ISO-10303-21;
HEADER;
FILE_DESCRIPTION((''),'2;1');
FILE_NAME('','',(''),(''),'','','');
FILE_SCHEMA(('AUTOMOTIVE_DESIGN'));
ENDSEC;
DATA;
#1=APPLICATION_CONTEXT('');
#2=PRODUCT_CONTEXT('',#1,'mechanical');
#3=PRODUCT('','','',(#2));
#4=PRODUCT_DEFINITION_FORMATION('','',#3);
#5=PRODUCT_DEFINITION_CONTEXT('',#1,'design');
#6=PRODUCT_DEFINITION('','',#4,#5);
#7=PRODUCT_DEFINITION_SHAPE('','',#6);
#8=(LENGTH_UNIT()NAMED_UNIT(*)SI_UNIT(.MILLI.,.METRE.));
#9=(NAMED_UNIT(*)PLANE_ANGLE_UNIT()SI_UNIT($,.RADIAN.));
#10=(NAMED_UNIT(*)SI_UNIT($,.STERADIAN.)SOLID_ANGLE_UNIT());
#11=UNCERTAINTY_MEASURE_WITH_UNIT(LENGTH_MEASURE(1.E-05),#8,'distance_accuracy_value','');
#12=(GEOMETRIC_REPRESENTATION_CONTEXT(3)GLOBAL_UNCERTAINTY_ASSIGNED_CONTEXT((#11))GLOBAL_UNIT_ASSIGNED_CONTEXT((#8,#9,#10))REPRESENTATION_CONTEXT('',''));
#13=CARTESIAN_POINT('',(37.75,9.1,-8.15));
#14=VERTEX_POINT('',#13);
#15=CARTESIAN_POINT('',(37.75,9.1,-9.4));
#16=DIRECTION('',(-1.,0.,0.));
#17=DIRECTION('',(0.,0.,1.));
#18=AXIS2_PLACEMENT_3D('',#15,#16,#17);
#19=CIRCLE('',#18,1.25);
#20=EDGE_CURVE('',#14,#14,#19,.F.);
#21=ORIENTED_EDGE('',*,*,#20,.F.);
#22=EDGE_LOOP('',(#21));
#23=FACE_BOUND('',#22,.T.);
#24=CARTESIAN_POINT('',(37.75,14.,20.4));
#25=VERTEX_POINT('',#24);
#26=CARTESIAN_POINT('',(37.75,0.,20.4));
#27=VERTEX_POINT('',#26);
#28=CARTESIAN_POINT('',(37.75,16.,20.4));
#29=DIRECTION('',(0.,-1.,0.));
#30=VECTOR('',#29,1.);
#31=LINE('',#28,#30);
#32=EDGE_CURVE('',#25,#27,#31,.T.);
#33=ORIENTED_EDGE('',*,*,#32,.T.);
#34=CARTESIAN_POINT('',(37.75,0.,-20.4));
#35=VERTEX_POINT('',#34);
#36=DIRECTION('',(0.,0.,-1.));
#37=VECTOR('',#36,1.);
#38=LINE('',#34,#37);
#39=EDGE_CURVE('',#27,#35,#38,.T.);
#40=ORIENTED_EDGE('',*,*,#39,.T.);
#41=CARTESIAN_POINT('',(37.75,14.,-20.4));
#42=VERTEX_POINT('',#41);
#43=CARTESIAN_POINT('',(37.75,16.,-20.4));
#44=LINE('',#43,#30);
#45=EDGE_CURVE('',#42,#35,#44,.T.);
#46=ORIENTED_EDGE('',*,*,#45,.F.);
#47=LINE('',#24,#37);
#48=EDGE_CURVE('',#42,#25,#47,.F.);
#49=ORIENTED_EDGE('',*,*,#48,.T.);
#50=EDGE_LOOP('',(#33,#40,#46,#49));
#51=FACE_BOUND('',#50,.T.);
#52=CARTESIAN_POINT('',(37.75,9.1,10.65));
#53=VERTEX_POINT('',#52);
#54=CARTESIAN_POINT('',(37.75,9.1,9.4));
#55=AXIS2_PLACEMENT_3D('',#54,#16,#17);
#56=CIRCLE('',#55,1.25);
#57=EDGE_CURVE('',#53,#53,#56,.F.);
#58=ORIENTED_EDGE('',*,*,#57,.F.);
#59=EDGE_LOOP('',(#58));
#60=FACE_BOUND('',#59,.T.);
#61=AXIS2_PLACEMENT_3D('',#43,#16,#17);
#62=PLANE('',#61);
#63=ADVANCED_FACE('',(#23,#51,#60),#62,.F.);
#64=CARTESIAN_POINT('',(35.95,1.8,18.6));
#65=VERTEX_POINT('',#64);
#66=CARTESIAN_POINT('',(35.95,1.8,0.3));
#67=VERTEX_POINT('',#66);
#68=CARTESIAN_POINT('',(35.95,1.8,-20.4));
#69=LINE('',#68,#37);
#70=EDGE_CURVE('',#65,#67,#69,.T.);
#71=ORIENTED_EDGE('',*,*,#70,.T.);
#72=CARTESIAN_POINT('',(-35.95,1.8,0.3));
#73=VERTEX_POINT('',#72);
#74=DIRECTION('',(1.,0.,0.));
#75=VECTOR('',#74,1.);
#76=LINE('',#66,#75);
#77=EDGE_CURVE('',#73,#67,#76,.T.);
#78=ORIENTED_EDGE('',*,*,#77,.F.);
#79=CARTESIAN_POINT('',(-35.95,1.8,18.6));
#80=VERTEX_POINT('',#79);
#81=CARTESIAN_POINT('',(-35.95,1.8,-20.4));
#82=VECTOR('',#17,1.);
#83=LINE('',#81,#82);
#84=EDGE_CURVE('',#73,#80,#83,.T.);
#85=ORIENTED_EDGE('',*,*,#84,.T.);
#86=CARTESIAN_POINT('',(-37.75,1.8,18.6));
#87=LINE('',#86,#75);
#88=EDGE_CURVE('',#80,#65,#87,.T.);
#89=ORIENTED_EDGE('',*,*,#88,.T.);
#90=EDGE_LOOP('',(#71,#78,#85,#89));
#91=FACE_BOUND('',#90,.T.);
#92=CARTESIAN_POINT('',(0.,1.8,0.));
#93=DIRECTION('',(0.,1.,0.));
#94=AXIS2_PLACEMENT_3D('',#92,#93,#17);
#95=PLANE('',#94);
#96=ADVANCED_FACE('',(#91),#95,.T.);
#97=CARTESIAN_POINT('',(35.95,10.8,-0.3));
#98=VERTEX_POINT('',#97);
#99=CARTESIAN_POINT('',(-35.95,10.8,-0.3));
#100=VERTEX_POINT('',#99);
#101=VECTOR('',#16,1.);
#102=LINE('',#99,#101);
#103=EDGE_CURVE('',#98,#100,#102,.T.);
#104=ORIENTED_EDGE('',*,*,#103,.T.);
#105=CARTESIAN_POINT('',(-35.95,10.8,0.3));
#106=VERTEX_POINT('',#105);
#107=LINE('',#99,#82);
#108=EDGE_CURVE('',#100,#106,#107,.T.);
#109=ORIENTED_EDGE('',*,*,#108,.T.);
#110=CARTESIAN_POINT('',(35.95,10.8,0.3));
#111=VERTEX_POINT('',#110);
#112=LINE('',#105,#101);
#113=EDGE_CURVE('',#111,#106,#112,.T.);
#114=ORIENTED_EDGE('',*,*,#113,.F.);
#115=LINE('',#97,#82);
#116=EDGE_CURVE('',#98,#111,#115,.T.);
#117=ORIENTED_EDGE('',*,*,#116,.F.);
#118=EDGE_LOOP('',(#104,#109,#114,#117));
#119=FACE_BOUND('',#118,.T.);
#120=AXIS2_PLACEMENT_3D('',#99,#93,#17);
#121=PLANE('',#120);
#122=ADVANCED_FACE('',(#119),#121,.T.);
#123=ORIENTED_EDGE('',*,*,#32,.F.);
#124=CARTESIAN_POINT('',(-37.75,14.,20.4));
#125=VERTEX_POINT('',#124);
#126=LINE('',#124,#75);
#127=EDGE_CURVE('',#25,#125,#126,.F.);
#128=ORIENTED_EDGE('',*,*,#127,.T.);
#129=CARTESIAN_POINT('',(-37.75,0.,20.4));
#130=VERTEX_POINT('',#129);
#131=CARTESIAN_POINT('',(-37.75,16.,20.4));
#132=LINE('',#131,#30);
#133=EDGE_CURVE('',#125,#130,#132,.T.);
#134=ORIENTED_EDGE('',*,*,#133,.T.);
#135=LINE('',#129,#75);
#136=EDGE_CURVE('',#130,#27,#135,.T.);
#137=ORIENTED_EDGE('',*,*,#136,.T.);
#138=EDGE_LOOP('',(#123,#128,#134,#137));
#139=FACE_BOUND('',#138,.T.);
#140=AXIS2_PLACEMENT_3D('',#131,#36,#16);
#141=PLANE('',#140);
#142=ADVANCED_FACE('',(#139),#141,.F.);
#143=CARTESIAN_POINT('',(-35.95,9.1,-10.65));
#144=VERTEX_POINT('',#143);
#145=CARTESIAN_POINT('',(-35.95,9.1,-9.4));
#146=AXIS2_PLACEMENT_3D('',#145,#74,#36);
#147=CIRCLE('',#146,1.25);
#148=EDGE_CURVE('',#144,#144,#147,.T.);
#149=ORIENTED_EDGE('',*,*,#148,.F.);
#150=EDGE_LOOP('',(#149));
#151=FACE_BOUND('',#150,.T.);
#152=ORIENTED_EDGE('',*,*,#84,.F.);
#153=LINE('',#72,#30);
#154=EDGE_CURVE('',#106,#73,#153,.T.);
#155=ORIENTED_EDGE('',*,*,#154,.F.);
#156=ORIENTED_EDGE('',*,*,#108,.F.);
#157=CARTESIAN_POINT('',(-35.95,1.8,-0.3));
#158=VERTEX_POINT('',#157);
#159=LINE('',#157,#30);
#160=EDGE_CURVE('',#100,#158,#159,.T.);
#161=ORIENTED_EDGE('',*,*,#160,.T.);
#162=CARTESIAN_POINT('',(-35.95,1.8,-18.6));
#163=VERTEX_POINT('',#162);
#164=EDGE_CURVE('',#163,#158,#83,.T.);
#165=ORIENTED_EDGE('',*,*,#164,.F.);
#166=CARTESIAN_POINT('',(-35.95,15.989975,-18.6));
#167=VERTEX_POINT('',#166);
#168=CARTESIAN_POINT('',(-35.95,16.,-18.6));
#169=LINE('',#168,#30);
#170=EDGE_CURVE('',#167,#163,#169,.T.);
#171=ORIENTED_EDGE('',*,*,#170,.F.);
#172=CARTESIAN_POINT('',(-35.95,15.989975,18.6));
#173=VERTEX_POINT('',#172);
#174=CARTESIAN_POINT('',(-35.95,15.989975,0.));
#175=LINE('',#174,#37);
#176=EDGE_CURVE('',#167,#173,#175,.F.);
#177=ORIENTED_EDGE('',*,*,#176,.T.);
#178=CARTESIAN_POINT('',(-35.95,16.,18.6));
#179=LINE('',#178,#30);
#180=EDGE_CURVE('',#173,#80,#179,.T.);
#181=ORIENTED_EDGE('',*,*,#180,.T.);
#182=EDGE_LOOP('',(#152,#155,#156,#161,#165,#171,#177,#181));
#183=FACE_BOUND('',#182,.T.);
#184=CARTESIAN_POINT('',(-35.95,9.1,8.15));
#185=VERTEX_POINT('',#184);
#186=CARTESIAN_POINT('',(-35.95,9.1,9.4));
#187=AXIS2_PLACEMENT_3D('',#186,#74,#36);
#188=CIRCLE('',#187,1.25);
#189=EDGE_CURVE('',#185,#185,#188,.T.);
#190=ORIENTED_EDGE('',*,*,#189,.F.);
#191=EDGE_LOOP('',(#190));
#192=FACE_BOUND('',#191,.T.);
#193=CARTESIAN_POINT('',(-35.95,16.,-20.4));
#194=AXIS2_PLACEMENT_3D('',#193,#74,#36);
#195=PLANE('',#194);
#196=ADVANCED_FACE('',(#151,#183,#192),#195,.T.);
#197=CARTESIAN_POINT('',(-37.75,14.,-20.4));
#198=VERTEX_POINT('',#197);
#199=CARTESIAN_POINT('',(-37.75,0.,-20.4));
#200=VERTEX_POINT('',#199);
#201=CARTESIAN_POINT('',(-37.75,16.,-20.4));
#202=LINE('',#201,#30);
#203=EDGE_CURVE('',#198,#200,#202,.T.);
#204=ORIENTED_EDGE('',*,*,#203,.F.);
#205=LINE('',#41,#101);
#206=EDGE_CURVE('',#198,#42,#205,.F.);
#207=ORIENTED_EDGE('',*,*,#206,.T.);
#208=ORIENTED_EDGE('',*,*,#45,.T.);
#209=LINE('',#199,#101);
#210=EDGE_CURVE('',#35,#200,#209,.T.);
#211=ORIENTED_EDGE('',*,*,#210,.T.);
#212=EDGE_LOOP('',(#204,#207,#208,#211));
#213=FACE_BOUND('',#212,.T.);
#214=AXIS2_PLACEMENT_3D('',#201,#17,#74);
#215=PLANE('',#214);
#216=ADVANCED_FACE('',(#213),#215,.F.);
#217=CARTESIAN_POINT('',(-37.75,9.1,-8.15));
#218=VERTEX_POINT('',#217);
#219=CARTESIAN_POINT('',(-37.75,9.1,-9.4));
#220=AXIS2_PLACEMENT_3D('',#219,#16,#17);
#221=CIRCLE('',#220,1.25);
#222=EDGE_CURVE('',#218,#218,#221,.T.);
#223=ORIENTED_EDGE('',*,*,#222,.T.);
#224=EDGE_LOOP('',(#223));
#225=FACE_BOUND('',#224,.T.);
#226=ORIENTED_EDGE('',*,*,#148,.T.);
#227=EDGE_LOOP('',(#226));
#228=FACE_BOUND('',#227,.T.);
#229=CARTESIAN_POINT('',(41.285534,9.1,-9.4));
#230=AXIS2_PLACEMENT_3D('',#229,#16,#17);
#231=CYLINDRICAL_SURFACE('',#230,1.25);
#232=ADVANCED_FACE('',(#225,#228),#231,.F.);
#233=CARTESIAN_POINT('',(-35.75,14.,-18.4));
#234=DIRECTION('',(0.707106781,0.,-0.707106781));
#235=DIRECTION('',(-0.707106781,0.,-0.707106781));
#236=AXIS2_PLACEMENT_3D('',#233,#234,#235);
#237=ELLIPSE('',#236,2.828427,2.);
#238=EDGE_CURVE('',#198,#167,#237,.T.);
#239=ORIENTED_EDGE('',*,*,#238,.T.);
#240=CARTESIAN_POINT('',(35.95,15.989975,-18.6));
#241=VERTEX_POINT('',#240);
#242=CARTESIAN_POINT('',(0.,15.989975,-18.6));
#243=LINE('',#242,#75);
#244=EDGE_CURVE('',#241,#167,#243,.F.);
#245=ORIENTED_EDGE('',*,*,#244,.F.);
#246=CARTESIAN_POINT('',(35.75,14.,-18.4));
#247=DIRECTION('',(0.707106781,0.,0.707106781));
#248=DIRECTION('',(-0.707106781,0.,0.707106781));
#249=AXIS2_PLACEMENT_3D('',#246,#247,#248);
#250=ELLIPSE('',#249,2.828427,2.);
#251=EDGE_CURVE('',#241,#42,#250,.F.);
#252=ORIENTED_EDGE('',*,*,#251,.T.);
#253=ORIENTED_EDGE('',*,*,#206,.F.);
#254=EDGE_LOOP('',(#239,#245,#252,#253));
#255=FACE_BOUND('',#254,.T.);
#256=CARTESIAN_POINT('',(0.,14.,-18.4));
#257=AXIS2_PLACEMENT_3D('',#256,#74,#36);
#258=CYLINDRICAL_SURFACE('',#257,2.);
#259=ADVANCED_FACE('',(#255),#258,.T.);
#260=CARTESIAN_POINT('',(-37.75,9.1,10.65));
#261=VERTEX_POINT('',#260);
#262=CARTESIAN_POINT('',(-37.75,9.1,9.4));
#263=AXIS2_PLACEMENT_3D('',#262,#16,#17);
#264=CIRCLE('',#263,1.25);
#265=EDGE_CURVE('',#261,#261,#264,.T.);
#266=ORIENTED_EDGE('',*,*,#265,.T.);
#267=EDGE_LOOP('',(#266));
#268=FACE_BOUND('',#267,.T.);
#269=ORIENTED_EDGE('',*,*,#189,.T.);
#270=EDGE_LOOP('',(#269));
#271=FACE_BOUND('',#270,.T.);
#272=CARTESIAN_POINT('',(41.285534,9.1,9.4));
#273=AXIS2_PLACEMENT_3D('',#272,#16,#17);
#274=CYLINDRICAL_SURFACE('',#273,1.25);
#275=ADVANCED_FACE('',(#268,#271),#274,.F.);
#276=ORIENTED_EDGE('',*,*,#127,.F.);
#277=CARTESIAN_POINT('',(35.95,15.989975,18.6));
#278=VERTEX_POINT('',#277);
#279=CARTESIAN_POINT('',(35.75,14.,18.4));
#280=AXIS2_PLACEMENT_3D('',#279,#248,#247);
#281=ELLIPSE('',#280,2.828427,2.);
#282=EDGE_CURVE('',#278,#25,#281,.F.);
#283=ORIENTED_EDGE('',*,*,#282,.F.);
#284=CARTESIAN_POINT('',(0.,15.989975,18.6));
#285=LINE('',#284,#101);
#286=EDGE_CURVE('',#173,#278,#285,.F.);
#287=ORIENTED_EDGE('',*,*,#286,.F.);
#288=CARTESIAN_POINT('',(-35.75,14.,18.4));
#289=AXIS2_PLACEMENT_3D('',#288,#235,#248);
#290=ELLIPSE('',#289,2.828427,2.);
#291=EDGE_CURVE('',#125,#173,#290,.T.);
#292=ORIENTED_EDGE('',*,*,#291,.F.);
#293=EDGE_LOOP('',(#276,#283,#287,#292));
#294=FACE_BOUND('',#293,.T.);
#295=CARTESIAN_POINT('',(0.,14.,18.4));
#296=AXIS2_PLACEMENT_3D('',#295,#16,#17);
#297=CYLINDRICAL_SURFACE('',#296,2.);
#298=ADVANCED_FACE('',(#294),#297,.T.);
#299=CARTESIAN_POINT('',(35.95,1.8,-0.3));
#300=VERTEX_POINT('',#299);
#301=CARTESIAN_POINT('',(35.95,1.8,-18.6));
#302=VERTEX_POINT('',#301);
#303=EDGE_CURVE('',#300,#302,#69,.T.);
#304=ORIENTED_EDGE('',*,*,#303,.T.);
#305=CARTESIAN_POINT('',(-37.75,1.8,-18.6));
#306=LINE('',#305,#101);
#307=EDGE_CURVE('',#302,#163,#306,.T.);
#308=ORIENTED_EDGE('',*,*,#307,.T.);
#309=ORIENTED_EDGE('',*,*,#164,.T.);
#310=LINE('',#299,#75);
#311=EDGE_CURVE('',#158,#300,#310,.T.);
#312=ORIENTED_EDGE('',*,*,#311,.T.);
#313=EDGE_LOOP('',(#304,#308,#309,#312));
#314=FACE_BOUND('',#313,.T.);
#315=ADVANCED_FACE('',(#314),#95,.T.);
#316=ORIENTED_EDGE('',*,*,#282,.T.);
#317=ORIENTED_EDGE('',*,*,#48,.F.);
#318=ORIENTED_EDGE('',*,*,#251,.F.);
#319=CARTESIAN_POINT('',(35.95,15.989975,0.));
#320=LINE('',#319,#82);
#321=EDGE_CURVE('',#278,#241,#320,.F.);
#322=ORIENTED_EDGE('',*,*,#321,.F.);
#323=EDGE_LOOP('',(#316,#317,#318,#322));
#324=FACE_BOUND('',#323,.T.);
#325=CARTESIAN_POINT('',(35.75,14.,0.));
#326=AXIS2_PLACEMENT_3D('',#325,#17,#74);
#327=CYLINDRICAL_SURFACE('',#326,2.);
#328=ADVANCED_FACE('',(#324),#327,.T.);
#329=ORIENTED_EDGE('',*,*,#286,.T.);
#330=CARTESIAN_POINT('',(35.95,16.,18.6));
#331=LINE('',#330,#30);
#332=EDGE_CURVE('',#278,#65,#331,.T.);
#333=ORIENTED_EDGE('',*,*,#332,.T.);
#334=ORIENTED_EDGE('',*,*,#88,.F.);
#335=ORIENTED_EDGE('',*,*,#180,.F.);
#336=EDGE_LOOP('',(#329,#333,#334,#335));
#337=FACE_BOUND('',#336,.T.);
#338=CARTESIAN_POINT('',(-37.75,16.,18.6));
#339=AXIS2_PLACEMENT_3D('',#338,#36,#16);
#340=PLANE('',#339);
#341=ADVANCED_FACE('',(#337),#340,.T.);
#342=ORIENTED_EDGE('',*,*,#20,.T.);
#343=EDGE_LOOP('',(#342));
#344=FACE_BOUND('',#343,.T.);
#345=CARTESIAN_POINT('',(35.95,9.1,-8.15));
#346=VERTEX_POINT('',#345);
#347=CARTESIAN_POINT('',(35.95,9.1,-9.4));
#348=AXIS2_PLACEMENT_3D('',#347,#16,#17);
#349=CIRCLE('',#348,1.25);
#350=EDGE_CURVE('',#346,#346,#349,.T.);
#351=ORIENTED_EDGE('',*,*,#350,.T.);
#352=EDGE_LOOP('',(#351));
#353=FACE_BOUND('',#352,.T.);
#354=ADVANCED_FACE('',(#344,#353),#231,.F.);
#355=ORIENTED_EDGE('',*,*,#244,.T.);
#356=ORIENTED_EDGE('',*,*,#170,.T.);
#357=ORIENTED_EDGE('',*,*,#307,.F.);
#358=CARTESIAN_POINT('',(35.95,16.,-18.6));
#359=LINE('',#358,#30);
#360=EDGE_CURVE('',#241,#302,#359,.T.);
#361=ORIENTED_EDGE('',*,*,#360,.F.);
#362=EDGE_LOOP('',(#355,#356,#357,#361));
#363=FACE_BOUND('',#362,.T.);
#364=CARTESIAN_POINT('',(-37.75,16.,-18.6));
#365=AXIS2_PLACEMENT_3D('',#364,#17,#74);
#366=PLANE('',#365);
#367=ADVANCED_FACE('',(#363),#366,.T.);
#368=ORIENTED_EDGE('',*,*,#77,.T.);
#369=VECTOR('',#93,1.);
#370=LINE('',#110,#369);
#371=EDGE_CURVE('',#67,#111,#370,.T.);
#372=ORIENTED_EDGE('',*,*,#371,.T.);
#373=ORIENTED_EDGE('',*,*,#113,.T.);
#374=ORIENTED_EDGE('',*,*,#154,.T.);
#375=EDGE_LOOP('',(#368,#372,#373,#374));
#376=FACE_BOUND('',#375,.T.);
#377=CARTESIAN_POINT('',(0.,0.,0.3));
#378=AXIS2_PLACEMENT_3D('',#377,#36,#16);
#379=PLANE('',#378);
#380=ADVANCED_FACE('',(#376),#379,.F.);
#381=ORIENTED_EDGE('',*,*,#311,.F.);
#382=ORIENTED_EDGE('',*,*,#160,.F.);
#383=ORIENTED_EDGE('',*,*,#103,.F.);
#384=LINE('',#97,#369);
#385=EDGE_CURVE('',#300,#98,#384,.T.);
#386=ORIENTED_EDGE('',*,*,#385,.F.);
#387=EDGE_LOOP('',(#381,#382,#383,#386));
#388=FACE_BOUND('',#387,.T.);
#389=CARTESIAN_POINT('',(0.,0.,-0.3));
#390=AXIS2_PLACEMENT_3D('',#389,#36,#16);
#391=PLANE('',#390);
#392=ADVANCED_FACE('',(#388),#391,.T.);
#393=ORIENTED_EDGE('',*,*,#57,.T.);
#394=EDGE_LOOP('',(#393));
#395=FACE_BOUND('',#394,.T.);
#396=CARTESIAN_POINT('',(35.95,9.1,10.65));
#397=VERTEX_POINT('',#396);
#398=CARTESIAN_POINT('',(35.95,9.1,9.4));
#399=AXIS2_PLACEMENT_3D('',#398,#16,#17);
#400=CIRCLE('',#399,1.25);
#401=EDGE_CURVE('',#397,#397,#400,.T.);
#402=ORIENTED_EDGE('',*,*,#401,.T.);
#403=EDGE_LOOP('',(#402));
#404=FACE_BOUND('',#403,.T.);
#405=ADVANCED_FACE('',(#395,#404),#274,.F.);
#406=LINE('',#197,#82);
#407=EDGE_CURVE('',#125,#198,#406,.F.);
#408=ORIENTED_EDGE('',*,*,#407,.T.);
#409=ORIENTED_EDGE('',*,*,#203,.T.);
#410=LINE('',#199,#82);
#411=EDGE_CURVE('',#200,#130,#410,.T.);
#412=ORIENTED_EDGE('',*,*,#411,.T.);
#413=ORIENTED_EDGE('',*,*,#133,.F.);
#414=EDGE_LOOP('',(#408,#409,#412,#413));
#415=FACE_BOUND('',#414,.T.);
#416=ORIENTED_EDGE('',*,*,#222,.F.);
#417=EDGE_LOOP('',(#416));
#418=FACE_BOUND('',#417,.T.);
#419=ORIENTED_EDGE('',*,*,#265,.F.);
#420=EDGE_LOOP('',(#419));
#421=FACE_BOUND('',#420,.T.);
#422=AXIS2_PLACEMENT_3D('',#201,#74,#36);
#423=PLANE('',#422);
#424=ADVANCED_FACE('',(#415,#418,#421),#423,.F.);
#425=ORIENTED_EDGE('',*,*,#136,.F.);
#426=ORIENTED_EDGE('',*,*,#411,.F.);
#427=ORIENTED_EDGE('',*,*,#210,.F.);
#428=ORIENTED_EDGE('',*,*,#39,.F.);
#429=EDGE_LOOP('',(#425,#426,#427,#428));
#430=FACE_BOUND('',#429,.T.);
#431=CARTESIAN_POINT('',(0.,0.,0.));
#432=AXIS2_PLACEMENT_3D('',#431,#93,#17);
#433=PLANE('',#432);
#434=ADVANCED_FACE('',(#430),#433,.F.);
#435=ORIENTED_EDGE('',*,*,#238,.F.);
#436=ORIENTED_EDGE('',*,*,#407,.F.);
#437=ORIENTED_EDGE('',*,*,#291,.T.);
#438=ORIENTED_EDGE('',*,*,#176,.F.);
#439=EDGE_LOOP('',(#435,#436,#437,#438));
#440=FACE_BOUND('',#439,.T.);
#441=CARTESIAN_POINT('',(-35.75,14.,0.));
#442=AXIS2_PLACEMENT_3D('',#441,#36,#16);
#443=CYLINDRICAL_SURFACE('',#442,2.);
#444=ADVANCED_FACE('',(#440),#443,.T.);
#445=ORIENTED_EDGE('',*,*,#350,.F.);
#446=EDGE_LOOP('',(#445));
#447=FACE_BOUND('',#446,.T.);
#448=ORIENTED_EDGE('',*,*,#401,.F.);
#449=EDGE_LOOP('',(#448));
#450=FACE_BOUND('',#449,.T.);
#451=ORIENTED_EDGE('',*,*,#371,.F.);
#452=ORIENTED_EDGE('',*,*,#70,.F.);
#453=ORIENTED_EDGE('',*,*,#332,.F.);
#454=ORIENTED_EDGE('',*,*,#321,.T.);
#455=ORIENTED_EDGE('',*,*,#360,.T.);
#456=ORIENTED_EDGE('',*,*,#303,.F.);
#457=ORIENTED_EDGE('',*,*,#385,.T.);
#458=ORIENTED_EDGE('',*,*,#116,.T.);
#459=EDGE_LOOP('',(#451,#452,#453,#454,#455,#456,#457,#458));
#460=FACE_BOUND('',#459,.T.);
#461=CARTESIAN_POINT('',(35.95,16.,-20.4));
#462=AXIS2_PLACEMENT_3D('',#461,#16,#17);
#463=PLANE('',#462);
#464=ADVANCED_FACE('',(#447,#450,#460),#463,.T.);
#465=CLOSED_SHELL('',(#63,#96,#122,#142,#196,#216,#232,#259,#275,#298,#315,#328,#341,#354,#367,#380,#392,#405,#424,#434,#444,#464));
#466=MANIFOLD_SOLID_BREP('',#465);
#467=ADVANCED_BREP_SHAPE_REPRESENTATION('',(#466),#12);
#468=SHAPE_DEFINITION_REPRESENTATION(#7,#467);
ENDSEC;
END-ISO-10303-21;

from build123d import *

# Parameters (mm, degrees)
CROQUIS1_W                   = 75.5
CROQUIS1_H                   = 40.8
SALIENTE_EXTRUIR1_DEPTH      = 16
VACIADO1_T                   = -1.8
SALIENTE_EXTRUIR2_DEPTH      = 0.3
SALIENTE_EXTRUIR2_DEPTH_BACK = 0.3
CROQUIS2_W                   = 71.9
CROQUIS2_H                   = 9
CORTAR_EXTRUIR1_REACH        = 81.827
CROQUIS3_R                   = 1.25
MATRIZL1_COUNT               = 2
MATRIZL1_PITCH               = 18.8
REDONDEO1_R                  = 2


with BuildPart() as part:
    # Croquis1 → Saliente-Extruir1 (new body)
    with BuildSketch(Plane(origin=(0, 0, 0), x_dir=(1, 0, 0), z_dir=(0, 1, 0))):
        Rectangle(CROQUIS1_W, CROQUIS1_H)
    extrude(amount=SALIENTE_EXTRUIR1_DEPTH)

    # Vaciado1
    vaciado1_openings = [part.faces().sort_by_distance(p)[0] for p in [
        (0, 16, 0),
    ]]
    offset(amount=VACIADO1_T, openings=vaciado1_openings, kind=Kind.INTERSECTION)

    # Croquis2 → Saliente-Extruir2 (add, two sides: drawn at the far end of the back side and taken through both)
    with BuildSketch(Plane.XY.offset(-SALIENTE_EXTRUIR2_DEPTH_BACK)):
        with Locations((0, 6.3)):
            Rectangle(CROQUIS2_W, CROQUIS2_H)
    extrude(amount=SALIENTE_EXTRUIR2_DEPTH + SALIENTE_EXTRUIR2_DEPTH_BACK)

    # Cortar-Extruir1: up to this face of the body (flat: up to its plane)
    cortar_extruir1_end = Plane(part.part.faces().sort_by_distance((37.75, 8, 0))[0])
    # Croquis3 → Cortar-Extruir1 (cut, up to the picked face)
    with BuildSketch(Plane.ZY.offset(37.75), mode=Mode.PRIVATE) as cortar_extruir1_sk1:
        with Locations((9.4, 9.1)):
            Circle(CROQUIS3_R)
    cortar_extruir1_tool1 = split(extrude(cortar_extruir1_sk1.sketch, amount=-CORTAR_EXTRUIR1_REACH, mode=Mode.PRIVATE), bisect_by=cortar_extruir1_end, keep=Keep.BOTH, mode=Mode.PRIVATE)
    cortar_extruir1 = cortar_extruir1_tool1.solids().sort_by(Axis((-37.75, 9.1, 9.4), (1, 0, 0)))[0]
    add(cortar_extruir1, mode=Mode.SUBTRACT)

    # MatrizL1: Cortar-Extruir1 ×2
    with Locations(*[(0, 0, -i * MATRIZL1_PITCH) for i in range(1, MATRIZL1_COUNT)]):
        add(cortar_extruir1, mode=Mode.SUBTRACT)

    # Redondeo1
    # the kernel refuses this fillet: 2 mm, written as the material it takes off along each edge
    with BuildSketch(Plane(origin=(-42.75, 16, -20.4), x_dir=(0, -1, 0), z_dir=(1, 0, 0))) as redondeo1_piece_1:
        with BuildLine():
            CenterArc((REDONDEO1_R, -REDONDEO1_R), REDONDEO1_R, 90, 90)
            Line((0, -REDONDEO1_R), (0, 0))
            Line((0, 0), (REDONDEO1_R, 0))
        make_face()
    extrude(amount=85.5, mode=Mode.SUBTRACT)
    with BuildSketch(Plane(origin=(-37.75, 16, 25.4), x_dir=(0, -1, 0), z_dir=(0, 0, -1)), Plane(origin=(37.75, 16, -25.4), x_dir=(0, -1, 0), z_dir=(0, 0, 1))) as redondeo1_piece_2:
        with BuildLine():
            CenterArc((REDONDEO1_R, -REDONDEO1_R), REDONDEO1_R, 90, 90)
            Line((0, -REDONDEO1_R), (0, 0))
            Line((0, 0), (REDONDEO1_R, 0))
        make_face()
    extrude(amount=50.8, mode=Mode.SUBTRACT)
    with BuildSketch(Plane(origin=(42.75, 16, 20.4), x_dir=(0, 0, -1), z_dir=(-1, 0, 0))) as redondeo1_piece_3:
        with BuildLine():
            CenterArc((REDONDEO1_R, REDONDEO1_R), REDONDEO1_R, 180, 90)
            Line((0, REDONDEO1_R), (0, 0))
            Line((0, 0), (REDONDEO1_R, 0))
        make_face()
    extrude(amount=85.5, mode=Mode.SUBTRACT)


solid = part.part
